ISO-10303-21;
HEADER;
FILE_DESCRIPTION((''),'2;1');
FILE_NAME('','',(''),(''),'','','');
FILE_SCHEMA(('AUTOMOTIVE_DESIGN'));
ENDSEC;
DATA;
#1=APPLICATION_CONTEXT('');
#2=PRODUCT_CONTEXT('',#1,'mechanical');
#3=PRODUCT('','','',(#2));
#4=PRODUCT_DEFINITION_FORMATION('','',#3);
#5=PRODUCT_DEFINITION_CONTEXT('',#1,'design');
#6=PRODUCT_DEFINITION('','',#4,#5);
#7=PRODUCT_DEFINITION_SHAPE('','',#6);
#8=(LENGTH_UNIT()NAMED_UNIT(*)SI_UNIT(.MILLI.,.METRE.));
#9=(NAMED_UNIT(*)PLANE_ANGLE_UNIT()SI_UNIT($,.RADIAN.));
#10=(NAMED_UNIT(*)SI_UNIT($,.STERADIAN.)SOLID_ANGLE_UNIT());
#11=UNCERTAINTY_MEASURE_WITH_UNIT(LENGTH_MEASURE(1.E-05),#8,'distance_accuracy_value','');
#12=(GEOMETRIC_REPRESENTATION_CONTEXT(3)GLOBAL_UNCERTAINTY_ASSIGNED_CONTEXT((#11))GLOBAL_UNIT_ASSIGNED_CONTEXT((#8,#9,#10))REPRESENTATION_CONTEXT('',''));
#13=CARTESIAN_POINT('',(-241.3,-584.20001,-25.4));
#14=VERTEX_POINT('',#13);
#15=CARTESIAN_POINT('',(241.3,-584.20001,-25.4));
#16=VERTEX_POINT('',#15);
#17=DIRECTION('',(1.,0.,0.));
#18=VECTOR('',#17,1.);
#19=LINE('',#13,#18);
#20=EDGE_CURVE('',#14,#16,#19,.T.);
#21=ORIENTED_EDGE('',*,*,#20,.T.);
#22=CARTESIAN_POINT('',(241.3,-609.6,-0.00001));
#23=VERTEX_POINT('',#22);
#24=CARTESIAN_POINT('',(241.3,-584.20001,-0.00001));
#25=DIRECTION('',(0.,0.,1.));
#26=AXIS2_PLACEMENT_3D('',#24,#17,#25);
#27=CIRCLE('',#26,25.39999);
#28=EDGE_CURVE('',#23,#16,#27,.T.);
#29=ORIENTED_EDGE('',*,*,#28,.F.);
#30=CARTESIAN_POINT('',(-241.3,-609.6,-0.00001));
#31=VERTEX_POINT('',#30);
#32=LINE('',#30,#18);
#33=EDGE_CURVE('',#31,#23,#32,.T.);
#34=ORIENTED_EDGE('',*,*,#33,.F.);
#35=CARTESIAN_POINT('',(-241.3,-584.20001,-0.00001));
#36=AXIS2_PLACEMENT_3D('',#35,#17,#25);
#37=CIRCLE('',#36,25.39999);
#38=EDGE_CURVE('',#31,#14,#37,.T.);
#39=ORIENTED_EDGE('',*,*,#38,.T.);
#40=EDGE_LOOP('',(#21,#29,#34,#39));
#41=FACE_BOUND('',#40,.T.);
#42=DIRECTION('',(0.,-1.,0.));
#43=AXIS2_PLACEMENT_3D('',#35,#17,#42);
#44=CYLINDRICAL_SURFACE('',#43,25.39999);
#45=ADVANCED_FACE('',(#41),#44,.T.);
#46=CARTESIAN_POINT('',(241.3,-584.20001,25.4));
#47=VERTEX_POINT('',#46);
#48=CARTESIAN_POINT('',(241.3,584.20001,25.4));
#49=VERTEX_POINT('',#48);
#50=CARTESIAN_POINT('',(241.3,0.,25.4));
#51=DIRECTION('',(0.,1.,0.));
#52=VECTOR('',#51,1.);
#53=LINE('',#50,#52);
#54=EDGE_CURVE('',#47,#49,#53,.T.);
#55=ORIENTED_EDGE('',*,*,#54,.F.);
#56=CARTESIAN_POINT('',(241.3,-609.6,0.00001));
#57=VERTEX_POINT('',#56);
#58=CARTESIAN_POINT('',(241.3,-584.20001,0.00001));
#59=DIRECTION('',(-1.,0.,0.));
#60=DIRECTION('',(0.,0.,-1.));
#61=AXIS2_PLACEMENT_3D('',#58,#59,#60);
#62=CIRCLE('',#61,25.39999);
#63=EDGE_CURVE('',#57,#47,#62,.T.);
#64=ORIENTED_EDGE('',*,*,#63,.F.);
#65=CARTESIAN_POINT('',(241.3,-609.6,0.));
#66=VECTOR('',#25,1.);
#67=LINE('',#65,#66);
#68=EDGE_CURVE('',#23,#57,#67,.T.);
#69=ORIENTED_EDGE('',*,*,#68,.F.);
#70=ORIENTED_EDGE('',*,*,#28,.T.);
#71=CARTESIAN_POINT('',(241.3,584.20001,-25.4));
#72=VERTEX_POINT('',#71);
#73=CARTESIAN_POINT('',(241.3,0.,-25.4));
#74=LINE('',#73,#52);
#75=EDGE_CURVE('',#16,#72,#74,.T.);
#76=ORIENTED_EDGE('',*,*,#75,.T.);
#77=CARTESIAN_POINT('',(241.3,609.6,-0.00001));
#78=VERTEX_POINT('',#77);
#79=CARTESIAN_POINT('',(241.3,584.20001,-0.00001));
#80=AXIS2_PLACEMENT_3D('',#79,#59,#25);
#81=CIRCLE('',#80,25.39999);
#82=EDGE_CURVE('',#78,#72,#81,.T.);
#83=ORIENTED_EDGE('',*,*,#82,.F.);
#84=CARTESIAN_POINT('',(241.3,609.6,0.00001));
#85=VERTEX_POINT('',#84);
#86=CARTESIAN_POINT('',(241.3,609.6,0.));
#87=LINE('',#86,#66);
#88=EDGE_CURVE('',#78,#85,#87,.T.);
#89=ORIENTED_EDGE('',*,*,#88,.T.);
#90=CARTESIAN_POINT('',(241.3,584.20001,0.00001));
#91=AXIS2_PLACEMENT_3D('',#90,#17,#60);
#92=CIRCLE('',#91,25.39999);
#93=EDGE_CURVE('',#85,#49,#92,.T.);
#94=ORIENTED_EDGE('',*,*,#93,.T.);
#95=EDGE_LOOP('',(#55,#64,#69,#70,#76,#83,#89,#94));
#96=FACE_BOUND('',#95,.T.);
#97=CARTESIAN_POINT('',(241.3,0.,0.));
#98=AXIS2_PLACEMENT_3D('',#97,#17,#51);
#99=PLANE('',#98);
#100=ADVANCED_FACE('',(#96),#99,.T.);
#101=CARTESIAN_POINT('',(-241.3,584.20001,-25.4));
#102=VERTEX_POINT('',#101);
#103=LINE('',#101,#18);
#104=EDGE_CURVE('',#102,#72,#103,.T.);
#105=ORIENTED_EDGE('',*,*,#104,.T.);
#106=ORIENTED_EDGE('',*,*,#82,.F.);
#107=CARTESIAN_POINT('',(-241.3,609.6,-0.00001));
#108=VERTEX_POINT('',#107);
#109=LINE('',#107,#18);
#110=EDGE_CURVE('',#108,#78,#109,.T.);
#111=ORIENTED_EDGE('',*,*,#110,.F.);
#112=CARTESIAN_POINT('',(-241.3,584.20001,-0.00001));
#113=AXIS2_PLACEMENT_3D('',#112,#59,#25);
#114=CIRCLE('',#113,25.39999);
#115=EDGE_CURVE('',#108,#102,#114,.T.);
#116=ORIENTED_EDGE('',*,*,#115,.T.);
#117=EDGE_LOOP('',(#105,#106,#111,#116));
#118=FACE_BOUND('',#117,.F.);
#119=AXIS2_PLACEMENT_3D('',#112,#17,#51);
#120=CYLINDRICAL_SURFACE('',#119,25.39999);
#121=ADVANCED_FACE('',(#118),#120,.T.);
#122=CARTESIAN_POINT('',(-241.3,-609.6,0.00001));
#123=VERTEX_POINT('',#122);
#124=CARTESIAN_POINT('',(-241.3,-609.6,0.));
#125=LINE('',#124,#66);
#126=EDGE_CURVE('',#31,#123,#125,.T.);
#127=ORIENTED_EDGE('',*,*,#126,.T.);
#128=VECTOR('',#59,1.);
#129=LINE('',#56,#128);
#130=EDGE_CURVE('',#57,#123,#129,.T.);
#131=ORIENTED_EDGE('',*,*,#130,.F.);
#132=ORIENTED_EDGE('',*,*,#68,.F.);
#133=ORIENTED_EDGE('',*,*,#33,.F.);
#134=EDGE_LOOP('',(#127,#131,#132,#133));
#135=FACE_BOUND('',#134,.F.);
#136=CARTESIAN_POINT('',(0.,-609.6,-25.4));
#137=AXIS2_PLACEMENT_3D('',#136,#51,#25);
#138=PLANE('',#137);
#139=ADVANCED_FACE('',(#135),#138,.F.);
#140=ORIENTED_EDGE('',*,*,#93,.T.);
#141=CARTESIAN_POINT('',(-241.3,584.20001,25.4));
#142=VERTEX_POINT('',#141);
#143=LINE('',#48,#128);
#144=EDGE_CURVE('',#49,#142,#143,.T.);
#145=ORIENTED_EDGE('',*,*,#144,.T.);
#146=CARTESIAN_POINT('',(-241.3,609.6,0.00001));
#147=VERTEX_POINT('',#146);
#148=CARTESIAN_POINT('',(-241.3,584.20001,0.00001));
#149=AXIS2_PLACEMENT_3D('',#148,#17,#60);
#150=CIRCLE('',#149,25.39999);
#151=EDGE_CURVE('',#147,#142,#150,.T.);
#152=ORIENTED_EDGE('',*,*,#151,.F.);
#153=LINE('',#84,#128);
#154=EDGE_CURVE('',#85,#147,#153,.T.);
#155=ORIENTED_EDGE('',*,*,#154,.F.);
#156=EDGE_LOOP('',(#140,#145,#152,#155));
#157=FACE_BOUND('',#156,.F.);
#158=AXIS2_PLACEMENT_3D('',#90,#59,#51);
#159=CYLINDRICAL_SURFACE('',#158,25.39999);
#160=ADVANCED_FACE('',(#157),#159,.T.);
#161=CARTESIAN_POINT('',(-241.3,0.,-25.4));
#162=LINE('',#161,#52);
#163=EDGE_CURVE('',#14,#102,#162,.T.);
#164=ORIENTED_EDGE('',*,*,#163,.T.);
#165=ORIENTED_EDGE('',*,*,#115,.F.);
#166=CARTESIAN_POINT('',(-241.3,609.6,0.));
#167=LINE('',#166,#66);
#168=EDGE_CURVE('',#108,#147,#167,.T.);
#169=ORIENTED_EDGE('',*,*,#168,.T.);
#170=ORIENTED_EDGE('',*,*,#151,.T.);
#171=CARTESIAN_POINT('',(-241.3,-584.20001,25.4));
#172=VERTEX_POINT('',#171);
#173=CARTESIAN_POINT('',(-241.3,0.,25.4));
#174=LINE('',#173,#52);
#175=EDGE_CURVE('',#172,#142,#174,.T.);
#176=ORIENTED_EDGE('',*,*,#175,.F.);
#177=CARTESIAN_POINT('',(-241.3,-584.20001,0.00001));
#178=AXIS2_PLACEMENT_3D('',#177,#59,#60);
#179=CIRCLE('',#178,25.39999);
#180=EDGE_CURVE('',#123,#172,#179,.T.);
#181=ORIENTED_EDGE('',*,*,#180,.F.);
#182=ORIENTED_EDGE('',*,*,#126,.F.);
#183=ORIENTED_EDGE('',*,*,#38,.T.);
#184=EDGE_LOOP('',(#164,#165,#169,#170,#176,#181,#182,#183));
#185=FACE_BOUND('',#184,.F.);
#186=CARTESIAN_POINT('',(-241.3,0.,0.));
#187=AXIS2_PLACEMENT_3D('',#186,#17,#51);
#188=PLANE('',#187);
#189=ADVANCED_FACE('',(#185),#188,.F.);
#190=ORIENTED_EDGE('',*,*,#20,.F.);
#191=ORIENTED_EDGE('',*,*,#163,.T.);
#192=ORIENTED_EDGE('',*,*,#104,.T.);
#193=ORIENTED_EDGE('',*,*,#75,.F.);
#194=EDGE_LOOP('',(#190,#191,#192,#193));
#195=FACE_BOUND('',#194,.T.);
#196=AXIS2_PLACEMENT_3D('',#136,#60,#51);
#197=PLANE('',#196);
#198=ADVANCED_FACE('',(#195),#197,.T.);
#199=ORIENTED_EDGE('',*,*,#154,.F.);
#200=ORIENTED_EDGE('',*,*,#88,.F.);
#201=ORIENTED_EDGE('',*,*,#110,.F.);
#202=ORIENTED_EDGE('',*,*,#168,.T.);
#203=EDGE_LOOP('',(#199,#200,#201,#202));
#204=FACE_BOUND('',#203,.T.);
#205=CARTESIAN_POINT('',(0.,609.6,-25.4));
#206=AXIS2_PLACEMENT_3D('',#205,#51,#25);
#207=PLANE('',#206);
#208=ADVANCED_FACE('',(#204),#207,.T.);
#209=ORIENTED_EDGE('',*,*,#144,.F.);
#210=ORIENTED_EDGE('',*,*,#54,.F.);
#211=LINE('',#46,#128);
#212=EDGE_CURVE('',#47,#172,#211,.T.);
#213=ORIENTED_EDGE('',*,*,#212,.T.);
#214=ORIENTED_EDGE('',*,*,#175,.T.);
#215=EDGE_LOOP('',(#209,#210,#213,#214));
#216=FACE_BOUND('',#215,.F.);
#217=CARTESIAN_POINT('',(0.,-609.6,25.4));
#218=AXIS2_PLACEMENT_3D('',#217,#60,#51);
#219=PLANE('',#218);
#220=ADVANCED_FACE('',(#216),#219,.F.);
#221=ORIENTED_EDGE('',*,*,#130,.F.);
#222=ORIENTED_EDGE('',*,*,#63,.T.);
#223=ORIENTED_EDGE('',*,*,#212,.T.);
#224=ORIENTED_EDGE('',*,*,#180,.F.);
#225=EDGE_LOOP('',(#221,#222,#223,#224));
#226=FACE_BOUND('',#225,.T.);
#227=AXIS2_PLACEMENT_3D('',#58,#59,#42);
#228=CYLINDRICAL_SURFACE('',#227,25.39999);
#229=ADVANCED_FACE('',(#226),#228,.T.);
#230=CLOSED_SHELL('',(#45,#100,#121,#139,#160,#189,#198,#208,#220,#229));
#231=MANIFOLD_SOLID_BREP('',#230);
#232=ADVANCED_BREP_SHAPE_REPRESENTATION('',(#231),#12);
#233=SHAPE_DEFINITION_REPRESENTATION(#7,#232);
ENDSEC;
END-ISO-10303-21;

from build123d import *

# Parameters (mm, degrees)
F0_W     = 1219.2
F0_H     = 50.8
F1_DEPTH = 241.3
F2_R     = 25.39999


# Not quite as in the source:
# - a fillet or chamfer is up to 0.001 mm smaller than in the source, because OpenCascade refuses the exact size


with BuildPart() as f1:
    # F0 (on Right) → F1 (new body, symmetric)
    with BuildSketch(Plane.YZ):
        Rectangle(F0_W, F0_H)
    extrude(amount=F1_DEPTH, both=True)

    # F2 (radius 25.4 in the source; OpenCascade refuses exactly that, so slightly less here)
    f2_edges = [f1.edges().sort_by_distance(p)[0] for p in [
        (0, -609.6, 25.4),
        (0, -609.6, -25.4),
        (0, 609.6, -25.4),
        (0, 609.6, 25.4),
    ]]
    fillet(f2_edges, radius=F2_R)


solid = f1.part
